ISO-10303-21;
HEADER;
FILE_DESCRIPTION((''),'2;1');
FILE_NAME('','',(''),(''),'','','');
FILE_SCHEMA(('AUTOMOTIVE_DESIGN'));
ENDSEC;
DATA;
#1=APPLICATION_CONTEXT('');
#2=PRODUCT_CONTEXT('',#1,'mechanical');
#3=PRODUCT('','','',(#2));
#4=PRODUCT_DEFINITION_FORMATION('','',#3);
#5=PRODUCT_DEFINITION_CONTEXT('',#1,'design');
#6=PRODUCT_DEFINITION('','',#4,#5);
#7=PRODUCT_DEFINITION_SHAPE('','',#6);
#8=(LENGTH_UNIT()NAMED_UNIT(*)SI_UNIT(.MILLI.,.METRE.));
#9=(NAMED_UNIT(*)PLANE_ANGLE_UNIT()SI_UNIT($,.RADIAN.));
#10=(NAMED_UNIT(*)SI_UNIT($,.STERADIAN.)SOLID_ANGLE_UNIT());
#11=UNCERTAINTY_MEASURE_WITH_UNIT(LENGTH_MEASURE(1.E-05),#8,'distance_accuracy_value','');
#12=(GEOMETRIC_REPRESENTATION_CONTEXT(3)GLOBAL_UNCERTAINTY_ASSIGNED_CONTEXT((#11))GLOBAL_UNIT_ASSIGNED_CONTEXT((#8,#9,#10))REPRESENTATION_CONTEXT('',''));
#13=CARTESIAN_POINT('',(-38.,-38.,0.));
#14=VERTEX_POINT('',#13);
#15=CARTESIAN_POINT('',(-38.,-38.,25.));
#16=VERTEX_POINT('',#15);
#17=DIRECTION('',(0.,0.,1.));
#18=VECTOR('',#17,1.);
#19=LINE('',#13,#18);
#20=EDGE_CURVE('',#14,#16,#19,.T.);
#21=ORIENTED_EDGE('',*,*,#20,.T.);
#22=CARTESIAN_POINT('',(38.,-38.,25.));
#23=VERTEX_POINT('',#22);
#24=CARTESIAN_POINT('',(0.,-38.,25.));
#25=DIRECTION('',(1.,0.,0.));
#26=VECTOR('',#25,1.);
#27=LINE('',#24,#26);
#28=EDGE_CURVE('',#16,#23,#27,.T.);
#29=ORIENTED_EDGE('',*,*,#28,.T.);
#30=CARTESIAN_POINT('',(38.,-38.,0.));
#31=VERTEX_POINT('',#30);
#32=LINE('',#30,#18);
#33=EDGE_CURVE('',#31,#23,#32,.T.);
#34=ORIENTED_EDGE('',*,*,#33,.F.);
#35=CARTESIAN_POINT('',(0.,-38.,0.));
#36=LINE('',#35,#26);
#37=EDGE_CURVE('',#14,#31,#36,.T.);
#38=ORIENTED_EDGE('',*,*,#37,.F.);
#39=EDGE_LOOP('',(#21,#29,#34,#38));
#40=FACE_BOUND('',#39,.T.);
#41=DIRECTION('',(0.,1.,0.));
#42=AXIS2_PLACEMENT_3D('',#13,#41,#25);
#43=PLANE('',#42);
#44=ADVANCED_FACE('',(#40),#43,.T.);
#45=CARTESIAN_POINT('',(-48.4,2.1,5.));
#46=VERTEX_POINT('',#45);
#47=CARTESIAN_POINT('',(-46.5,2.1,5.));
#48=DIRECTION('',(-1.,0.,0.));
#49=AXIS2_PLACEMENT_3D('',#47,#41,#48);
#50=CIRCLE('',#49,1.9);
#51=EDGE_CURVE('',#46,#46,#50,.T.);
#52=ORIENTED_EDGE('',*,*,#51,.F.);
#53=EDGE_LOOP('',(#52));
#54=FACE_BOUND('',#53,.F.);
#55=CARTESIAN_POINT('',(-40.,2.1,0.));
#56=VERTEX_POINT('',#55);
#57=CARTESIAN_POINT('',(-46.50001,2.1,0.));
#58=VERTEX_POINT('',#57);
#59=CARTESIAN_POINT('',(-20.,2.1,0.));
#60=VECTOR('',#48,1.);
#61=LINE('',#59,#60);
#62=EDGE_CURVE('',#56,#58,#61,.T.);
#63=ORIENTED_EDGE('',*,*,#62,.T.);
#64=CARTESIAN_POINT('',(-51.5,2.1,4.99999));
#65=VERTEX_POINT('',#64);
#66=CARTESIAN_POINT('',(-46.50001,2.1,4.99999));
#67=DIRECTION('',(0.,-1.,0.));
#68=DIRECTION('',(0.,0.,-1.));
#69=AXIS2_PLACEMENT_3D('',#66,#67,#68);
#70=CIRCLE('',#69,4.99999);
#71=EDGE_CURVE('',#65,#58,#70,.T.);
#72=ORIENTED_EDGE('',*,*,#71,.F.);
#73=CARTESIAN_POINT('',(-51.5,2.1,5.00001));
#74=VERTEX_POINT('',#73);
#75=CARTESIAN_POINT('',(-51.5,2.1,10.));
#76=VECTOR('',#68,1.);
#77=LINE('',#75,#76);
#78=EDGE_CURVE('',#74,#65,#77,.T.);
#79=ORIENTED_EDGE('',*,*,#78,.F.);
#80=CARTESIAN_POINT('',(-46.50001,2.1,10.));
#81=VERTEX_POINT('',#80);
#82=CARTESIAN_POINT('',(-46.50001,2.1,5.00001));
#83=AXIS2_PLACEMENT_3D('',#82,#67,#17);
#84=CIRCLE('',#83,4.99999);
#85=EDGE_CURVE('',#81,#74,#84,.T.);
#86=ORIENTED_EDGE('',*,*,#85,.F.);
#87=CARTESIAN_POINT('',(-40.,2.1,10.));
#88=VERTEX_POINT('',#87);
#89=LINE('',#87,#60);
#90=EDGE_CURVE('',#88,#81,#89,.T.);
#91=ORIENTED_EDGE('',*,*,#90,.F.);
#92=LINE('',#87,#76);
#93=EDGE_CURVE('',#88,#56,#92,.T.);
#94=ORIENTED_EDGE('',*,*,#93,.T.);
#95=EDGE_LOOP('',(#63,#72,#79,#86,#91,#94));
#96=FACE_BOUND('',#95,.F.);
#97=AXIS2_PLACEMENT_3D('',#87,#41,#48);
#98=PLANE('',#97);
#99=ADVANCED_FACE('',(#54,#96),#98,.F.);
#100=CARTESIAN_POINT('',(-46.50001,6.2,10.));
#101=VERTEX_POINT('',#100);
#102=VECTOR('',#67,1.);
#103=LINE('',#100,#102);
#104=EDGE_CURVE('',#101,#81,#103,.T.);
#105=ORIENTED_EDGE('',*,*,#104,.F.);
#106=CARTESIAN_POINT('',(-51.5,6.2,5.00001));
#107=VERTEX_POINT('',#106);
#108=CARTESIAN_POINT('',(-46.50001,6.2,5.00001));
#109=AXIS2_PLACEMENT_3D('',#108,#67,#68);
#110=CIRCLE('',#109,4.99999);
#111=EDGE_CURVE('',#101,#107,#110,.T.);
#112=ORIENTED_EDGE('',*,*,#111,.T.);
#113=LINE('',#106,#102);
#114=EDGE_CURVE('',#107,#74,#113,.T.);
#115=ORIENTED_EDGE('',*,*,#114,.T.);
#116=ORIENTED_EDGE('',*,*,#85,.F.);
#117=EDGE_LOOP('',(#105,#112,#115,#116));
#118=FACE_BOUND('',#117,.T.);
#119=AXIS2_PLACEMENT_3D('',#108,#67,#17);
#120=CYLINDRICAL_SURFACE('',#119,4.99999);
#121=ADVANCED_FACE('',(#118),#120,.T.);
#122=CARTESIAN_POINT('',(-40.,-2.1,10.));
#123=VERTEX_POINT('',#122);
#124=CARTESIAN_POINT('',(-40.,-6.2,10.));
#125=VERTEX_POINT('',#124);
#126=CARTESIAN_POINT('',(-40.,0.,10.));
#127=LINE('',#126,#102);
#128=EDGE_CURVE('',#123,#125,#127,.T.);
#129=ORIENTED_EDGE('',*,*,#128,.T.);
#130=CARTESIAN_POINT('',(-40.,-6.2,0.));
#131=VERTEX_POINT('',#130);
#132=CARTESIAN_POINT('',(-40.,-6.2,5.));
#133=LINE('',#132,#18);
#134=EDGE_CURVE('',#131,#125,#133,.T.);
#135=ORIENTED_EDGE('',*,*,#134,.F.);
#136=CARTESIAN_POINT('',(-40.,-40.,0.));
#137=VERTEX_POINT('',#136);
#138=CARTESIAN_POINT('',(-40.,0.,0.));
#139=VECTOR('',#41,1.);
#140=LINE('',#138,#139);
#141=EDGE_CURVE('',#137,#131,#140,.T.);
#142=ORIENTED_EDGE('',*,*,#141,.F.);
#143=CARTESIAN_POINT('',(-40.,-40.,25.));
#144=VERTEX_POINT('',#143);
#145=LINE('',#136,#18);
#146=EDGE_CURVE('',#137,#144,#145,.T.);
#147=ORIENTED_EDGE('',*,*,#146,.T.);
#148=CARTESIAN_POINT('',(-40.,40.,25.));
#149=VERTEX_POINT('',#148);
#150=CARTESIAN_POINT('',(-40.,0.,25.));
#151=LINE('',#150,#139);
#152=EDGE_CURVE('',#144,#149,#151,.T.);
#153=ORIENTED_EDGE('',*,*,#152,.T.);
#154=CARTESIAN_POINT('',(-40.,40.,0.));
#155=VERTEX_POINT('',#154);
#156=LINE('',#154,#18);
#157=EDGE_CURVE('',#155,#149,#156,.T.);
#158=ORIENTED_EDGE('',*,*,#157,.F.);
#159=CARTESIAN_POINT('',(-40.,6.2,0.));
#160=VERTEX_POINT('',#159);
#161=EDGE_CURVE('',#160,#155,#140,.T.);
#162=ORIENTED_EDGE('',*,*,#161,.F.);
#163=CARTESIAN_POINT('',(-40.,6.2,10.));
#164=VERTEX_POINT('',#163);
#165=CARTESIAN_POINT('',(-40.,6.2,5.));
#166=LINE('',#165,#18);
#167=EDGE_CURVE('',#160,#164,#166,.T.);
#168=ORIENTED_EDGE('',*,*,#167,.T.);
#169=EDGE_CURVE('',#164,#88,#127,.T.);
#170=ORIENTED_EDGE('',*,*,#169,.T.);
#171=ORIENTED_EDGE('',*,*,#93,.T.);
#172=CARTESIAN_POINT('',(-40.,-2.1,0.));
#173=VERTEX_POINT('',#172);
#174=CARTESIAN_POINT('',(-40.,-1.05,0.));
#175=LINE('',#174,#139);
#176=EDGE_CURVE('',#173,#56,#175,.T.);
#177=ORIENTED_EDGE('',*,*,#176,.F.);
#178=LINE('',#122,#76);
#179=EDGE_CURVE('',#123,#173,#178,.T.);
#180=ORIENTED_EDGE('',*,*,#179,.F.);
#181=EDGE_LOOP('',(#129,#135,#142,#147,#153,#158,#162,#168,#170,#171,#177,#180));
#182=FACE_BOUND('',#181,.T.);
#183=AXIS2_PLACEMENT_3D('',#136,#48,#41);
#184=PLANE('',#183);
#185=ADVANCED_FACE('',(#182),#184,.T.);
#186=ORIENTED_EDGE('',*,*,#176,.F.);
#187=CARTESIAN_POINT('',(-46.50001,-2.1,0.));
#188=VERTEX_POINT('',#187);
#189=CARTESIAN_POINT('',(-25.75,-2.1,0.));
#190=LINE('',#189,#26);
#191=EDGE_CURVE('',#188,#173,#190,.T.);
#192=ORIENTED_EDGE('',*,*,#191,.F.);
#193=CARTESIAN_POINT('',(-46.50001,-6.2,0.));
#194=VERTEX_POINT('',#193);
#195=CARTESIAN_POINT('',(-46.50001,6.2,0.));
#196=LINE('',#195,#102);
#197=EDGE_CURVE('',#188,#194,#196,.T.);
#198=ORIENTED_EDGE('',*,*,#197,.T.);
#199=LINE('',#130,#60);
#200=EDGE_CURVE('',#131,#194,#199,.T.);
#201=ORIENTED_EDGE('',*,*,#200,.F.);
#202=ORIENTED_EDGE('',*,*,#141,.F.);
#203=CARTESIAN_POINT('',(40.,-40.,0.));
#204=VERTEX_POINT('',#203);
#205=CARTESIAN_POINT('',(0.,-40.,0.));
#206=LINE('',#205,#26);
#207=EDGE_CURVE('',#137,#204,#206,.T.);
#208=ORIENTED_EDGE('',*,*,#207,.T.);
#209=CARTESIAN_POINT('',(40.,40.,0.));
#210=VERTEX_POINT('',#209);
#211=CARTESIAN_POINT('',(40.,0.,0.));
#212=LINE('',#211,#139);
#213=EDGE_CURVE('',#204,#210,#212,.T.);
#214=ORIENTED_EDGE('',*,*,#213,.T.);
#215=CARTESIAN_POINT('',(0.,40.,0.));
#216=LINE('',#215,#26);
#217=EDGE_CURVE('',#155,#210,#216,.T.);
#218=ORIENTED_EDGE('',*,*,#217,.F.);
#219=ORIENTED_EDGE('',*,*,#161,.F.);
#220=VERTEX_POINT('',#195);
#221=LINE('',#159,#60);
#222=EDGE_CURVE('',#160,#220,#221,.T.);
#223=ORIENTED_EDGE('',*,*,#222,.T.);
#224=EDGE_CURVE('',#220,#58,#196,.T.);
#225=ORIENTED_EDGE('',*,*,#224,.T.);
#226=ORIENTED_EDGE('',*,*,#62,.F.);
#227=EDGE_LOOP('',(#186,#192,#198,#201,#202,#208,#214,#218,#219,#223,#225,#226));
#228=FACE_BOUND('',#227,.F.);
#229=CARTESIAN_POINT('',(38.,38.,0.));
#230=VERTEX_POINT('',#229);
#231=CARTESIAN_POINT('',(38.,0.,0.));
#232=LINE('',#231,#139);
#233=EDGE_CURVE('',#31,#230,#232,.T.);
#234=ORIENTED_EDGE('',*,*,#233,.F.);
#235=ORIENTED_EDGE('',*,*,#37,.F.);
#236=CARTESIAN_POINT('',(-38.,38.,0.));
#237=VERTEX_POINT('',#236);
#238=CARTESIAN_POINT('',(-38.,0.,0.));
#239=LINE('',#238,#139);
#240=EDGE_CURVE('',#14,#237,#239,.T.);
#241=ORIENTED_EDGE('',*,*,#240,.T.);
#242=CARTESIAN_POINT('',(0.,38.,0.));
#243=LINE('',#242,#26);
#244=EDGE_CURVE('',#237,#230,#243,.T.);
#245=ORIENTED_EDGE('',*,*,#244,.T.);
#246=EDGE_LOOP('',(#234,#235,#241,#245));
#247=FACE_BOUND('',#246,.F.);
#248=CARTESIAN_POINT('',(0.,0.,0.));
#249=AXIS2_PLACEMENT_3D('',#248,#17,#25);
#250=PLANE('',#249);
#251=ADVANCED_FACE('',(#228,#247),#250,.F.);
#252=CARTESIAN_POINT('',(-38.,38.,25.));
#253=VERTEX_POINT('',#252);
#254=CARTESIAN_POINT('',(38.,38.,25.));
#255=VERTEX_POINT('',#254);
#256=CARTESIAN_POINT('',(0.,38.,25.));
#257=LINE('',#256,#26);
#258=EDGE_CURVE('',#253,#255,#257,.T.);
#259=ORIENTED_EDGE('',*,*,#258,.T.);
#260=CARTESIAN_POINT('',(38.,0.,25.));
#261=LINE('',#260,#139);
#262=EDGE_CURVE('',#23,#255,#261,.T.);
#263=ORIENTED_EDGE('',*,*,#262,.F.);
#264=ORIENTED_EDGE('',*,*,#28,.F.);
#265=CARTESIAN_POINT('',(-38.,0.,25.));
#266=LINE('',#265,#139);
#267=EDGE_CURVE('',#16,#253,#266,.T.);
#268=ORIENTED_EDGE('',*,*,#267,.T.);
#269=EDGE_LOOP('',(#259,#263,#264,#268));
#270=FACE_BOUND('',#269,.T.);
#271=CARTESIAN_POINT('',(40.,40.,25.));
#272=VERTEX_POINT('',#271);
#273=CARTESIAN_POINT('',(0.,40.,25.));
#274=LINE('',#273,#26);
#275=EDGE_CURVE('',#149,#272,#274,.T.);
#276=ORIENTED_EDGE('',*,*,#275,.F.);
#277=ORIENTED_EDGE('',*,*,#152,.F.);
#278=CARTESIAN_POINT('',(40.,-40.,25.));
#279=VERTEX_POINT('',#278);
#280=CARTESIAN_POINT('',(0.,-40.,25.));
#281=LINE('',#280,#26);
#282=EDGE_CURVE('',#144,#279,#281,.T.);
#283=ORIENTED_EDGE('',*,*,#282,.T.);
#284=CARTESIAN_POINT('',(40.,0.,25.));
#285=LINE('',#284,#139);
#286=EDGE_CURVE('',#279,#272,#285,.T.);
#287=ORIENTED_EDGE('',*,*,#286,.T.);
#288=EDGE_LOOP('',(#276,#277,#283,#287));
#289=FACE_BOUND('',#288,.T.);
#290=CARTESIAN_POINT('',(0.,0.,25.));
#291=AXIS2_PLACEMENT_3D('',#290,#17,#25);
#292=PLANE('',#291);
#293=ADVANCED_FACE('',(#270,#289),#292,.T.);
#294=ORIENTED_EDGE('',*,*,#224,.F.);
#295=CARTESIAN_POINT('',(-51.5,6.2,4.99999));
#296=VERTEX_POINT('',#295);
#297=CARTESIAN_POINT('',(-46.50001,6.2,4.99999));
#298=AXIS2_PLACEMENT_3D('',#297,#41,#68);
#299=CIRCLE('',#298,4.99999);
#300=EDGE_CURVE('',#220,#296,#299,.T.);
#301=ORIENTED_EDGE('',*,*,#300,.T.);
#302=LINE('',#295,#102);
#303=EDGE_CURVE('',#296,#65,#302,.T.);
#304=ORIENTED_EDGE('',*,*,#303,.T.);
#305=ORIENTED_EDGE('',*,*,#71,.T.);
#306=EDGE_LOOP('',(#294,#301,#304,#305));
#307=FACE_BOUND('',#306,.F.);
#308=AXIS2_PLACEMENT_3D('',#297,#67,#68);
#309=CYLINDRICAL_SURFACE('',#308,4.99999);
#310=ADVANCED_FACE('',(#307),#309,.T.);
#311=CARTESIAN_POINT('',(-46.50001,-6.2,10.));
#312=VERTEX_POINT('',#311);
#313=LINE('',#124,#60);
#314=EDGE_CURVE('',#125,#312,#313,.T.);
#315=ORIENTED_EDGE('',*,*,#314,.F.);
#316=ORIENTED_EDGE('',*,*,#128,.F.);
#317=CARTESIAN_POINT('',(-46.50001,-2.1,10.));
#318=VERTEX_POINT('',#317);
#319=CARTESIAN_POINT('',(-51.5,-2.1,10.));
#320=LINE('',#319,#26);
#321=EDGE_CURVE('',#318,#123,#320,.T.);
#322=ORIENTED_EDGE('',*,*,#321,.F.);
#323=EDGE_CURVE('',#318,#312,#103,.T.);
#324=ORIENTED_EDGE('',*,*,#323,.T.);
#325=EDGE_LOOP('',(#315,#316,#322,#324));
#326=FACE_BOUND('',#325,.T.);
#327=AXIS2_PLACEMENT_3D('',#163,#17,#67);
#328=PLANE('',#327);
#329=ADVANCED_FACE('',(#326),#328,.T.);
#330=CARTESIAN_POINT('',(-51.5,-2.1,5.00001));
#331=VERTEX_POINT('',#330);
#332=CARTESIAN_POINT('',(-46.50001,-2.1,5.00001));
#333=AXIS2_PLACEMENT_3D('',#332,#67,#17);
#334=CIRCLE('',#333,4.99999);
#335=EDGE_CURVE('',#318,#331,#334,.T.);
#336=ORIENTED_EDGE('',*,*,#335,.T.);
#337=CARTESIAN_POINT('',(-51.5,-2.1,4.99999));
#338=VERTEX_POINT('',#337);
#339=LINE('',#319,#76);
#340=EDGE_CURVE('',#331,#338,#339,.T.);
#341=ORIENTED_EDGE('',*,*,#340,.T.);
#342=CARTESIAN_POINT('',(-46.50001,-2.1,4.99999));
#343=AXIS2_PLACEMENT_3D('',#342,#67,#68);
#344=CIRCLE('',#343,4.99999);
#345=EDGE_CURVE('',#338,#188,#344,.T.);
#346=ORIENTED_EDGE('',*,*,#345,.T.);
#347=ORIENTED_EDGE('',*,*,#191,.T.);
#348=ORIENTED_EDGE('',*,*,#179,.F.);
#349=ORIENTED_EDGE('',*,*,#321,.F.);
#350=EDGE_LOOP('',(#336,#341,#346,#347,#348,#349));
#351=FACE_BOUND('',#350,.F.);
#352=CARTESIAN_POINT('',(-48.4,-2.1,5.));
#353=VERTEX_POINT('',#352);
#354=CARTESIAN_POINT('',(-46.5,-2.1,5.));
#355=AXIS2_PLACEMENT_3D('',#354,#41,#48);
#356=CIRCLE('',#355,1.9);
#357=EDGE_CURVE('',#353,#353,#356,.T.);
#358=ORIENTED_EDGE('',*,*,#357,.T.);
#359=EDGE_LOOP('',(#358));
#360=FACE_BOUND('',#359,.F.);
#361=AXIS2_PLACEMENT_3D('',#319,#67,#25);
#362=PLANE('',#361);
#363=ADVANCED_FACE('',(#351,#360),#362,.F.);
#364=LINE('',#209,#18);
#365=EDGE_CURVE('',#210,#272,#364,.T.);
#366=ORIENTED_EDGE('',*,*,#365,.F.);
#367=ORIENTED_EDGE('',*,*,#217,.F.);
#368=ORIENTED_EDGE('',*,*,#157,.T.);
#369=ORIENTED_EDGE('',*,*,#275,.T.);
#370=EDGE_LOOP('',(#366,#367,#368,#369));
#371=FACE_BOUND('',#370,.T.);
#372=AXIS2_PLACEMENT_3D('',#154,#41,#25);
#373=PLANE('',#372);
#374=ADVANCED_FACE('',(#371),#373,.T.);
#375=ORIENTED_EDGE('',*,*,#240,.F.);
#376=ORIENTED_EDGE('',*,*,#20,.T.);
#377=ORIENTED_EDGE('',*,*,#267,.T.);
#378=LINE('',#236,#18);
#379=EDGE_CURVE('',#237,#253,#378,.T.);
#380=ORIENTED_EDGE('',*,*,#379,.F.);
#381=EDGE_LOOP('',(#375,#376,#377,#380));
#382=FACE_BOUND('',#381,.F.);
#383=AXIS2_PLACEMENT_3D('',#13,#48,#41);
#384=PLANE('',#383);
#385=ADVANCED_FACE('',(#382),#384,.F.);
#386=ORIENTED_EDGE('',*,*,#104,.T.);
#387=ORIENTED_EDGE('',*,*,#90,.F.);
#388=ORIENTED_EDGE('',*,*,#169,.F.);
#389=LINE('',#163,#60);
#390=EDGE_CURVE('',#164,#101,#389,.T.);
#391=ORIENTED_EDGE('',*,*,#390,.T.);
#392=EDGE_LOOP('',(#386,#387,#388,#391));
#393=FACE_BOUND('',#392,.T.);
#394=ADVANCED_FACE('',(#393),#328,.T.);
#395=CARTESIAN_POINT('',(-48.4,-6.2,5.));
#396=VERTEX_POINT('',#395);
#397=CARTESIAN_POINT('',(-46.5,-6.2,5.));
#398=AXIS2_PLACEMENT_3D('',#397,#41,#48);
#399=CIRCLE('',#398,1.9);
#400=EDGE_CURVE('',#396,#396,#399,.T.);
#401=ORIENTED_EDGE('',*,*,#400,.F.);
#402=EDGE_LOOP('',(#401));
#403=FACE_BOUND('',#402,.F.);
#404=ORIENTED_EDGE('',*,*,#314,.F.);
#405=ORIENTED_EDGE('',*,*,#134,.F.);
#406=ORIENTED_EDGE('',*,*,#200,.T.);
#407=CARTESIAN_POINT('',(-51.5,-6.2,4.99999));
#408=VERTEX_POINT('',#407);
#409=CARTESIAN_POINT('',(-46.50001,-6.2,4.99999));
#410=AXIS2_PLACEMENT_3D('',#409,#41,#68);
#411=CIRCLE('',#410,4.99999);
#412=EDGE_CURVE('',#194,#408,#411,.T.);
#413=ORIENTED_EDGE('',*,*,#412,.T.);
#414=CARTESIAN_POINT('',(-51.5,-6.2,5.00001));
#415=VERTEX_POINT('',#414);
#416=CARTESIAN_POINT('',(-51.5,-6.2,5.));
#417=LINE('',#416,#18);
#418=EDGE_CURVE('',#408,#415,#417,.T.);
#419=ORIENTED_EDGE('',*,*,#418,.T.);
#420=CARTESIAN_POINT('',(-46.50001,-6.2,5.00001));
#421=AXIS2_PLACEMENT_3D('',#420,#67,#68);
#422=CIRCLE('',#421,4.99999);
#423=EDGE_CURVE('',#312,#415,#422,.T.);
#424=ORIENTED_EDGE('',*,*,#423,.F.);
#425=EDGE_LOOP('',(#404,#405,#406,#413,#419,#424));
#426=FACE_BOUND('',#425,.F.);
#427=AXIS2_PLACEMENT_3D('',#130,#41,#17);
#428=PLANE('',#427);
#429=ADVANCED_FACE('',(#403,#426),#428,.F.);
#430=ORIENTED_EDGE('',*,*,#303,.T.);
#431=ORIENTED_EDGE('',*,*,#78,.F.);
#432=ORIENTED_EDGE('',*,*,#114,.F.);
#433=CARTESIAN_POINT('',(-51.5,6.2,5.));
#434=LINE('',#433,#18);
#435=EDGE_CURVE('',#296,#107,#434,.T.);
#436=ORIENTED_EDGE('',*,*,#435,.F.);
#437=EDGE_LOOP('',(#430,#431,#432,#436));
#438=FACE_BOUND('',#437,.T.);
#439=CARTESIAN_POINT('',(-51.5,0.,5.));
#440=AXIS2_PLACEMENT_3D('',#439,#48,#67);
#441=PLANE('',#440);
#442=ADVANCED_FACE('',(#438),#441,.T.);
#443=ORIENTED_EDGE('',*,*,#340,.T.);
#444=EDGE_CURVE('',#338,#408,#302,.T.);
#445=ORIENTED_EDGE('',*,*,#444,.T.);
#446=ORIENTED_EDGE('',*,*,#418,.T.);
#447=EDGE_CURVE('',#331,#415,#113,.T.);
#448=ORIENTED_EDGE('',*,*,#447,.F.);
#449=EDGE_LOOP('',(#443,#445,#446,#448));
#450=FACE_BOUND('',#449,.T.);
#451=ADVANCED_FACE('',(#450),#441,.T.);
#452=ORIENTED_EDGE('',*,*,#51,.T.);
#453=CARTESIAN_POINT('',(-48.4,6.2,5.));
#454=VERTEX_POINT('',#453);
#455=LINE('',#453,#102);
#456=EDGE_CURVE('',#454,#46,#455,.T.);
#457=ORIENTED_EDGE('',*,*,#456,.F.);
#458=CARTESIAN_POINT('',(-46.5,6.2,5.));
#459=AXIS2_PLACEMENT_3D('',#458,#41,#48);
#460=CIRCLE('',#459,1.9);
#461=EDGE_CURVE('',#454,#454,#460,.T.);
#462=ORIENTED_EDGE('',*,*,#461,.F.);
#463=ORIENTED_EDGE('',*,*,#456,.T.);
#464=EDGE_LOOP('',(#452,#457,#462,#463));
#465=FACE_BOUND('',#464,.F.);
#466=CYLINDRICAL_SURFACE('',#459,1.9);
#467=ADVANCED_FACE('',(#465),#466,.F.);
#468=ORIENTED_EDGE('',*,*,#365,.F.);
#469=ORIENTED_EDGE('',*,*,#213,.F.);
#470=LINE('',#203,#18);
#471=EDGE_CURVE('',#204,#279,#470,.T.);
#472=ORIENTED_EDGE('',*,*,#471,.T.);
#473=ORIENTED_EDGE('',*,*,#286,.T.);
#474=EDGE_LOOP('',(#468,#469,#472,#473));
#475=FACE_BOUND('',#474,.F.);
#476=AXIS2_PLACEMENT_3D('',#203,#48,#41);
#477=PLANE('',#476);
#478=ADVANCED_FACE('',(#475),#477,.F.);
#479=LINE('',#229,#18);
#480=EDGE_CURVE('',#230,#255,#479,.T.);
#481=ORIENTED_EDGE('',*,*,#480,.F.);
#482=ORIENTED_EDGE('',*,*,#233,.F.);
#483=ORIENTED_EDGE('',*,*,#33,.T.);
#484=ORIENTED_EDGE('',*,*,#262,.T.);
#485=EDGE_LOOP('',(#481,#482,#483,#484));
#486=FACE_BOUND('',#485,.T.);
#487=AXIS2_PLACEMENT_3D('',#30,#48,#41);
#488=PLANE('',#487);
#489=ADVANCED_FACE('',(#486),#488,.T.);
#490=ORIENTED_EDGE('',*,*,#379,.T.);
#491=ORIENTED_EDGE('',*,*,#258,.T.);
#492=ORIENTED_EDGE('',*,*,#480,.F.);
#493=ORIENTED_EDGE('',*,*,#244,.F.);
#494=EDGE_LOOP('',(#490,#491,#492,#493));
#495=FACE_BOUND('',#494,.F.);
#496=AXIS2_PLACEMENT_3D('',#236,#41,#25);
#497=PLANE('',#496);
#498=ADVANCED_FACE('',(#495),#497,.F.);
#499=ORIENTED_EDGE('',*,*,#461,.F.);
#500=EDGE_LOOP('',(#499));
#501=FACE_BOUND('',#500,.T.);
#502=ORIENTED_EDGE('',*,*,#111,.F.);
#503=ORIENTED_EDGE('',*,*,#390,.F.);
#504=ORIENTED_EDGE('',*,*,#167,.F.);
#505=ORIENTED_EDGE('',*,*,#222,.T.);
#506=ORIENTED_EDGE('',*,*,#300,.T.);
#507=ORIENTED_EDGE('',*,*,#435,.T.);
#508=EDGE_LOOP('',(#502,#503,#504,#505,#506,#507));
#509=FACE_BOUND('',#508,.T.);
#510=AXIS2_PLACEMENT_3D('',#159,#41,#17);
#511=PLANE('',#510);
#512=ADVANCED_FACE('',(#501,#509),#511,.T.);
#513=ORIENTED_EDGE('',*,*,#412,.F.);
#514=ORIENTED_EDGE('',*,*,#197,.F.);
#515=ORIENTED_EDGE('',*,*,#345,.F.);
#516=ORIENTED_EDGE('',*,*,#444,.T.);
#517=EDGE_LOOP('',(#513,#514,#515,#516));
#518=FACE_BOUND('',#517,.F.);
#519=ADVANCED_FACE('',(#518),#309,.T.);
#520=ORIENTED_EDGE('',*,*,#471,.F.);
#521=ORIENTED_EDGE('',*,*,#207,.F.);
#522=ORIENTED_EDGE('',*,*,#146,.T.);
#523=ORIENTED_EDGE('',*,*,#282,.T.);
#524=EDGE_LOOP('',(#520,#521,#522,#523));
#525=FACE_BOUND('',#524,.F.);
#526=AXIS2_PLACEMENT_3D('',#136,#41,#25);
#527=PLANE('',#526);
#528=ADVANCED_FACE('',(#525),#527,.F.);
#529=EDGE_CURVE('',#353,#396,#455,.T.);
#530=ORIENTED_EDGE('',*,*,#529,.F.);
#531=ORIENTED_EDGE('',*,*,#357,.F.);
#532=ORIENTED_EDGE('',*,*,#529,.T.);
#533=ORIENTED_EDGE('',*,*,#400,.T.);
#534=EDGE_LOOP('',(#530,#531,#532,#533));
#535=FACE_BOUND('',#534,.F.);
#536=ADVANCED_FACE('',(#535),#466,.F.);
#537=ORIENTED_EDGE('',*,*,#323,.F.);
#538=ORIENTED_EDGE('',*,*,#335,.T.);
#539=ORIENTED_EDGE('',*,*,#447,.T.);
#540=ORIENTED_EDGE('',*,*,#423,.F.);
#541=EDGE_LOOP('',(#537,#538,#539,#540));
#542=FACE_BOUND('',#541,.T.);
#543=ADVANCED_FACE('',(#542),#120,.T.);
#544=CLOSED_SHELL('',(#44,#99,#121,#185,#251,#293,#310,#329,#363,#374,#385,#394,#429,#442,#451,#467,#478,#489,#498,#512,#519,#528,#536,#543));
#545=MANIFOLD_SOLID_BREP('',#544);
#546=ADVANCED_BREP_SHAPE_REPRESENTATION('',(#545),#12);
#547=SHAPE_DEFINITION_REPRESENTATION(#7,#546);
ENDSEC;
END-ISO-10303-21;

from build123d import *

# Parameters (mm, degrees)
F0_W     = 80
F0_H     = 80
F0_W_2   = 76
F0_H_2   = 76
F1_DEPTH = 25
F2_W     = 12.4
F2_H     = 10
F3_DEPTH = 11.5
F4_R     = 4.99999
F5_R     = 1.9
F6_DEPTH = 25
F7_W     = 6.50001
F7_H     = 4.2
F7_W_2   = 4.99999
F8_DEPTH = 25


# Not quite as in the source:
# - a fillet or chamfer is up to 0.001 mm smaller than in the source, because OpenCascade refuses the exact size


with BuildPart() as f1:
    # F0 (on Top) → F1 (new body)
    with BuildSketch(Plane.XY):
        Rectangle(F0_W, F0_H)
        Rectangle(F0_W_2, F0_H_2, mode=Mode.SUBTRACT)
    extrude(amount=F1_DEPTH)

    # F2 (on face) → F3 (join)
    with BuildSketch(Plane(origin=(-40, 0, 0), x_dir=(0, -1, 0), z_dir=(-1, 0, 0))):
        with Locations((0, 5)):
            Rectangle(F2_W, F2_H)
    extrude(amount=F3_DEPTH)

    # F4 (radius 5 in the source; OpenCascade refuses exactly that, so slightly less here)
    f4_edges = [f1.edges().sort_by_distance(p)[0] for p in [
        (-51.5, 0, 10),
        (-51.5, 0, 0),
    ]]
    fillet(f4_edges, radius=F4_R)

    # F5 (on face) → F6 (cut)
    with BuildSketch(Plane(origin=(0, 6.2, 0), x_dir=(-1, 0, 0), z_dir=(0, 1, 0))):
        with Locations((46.5, 5)):
            Circle(F5_R)
    extrude(amount=-F6_DEPTH, mode=Mode.SUBTRACT)

    # F7 (on face) → F8 (cut)
    with BuildSketch(Plane.XY.offset(10)):
        with Locations((-43.250005, 0)):
            Rectangle(F7_W, F7_H)
        with Locations((-49.000005, 0)):
            Rectangle(F7_W_2, F7_H)
    extrude(amount=-F8_DEPTH, mode=Mode.SUBTRACT)


solid = f1.part
